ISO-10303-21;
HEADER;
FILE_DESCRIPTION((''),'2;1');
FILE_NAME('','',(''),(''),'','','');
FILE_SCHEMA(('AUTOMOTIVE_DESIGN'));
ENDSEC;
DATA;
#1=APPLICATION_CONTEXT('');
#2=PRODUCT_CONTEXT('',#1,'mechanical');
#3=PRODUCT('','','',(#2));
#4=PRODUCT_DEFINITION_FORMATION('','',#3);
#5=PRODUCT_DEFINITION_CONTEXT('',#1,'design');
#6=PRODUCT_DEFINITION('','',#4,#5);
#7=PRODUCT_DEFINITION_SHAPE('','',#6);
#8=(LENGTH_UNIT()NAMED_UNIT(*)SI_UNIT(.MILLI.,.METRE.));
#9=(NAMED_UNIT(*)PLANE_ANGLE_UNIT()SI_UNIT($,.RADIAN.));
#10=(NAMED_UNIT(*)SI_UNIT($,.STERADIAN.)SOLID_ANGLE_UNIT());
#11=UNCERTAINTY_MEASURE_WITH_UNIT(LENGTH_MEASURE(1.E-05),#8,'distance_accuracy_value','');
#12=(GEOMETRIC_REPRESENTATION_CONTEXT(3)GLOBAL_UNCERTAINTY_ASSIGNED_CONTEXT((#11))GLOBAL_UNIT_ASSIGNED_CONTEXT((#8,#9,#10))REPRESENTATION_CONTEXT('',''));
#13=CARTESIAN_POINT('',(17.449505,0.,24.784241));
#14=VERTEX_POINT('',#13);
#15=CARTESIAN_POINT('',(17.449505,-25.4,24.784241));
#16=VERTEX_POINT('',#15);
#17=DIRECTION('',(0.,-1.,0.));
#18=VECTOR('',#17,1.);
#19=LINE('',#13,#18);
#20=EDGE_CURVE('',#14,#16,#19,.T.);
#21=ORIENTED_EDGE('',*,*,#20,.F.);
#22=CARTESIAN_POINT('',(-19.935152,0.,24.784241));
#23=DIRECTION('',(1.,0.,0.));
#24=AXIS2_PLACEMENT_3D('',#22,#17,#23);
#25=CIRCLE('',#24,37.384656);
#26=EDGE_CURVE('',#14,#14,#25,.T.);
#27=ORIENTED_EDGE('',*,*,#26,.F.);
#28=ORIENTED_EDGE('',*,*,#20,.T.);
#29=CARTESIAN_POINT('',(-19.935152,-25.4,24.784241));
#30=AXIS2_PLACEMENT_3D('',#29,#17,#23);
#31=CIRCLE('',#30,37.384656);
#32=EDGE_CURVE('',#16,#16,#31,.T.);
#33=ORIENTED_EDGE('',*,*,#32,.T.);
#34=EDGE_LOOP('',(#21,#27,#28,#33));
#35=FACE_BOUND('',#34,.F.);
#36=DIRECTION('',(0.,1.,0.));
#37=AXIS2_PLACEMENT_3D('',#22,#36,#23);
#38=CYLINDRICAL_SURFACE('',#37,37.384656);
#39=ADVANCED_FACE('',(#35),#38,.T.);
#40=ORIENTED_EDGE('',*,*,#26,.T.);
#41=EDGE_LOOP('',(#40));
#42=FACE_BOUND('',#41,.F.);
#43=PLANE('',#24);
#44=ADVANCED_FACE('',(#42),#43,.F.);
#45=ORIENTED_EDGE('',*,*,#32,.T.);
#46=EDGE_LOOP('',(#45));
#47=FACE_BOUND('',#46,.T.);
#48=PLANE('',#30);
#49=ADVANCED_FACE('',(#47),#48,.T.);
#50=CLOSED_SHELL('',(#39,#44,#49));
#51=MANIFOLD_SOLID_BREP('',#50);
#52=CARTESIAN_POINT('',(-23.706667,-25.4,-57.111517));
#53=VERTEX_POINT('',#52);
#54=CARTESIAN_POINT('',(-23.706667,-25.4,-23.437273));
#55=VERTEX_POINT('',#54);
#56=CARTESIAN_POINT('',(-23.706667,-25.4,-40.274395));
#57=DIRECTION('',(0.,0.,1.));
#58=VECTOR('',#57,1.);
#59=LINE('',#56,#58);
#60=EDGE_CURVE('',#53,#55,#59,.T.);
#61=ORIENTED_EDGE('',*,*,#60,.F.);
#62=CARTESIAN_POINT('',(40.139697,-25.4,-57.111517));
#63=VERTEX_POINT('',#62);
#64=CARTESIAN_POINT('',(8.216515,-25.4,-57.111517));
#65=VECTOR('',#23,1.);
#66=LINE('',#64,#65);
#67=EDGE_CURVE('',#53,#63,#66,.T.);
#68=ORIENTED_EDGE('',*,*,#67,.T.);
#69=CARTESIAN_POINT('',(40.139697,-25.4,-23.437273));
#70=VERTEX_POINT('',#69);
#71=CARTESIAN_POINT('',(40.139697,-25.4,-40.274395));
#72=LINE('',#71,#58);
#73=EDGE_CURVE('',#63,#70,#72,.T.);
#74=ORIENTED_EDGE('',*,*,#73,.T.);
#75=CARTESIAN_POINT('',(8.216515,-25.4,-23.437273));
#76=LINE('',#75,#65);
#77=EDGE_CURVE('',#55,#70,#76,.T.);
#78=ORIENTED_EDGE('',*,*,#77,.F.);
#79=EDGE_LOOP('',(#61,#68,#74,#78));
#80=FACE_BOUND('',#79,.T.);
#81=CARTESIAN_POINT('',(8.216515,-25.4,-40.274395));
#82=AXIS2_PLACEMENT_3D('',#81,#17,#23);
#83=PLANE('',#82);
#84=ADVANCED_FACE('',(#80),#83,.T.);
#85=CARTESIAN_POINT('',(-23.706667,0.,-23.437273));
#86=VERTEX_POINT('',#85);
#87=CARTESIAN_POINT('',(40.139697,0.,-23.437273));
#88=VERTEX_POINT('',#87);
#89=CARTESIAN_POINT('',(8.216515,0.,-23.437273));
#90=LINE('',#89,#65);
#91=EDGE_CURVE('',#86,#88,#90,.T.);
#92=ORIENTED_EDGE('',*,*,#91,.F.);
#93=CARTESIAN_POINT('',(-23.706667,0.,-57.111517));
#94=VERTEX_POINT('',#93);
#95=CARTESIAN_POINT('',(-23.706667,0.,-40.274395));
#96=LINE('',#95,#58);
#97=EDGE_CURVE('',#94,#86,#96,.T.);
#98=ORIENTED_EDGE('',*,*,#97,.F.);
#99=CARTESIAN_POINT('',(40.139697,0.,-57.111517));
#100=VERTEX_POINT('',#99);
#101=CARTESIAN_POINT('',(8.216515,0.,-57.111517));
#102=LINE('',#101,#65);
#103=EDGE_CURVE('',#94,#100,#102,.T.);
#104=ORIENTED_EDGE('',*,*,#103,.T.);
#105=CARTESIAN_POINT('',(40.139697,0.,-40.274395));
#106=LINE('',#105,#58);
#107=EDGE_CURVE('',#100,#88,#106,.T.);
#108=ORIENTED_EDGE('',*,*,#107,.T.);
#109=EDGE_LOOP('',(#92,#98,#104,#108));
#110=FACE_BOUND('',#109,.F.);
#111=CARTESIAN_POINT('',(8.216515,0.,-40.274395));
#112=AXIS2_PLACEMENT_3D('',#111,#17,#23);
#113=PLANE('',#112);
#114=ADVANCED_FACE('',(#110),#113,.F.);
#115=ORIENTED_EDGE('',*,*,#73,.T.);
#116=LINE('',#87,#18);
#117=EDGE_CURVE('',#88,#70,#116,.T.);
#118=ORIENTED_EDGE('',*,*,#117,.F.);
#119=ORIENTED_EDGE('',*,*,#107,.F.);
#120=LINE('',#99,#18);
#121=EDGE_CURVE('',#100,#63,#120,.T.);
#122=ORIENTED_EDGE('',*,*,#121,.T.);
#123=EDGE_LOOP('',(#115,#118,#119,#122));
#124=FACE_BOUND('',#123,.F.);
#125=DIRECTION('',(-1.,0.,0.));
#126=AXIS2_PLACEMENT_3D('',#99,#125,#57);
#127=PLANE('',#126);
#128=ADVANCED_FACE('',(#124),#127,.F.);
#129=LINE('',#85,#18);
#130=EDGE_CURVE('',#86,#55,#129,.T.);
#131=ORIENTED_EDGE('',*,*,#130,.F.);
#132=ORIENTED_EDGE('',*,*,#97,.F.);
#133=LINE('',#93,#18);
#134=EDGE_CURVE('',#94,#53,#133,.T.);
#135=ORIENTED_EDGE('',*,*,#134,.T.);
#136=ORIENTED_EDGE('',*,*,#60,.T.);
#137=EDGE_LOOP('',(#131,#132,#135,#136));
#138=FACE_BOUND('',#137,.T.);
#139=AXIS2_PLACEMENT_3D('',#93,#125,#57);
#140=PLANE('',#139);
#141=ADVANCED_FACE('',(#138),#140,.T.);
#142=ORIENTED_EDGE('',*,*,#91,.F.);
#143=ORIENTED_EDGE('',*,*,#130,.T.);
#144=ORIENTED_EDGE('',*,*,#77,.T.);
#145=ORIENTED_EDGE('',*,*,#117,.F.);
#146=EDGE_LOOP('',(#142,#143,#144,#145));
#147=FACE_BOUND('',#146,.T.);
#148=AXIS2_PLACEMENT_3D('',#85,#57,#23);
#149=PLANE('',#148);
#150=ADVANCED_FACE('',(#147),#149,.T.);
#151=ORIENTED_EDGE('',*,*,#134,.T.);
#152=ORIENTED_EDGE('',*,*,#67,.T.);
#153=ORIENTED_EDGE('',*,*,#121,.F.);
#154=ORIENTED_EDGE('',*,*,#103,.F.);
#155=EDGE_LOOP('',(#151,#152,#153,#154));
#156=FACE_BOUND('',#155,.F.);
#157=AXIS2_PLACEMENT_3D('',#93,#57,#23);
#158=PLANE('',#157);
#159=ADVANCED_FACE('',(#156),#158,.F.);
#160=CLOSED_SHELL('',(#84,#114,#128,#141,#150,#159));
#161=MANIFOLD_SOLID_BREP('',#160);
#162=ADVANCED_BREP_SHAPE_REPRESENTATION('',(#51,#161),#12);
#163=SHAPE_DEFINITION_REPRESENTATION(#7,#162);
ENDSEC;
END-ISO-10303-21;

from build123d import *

# Parameters (mm, degrees)
F0_R     = 37.3846562125
F1_DEPTH = 25.4
F0_W     = 63.8463646173
F0_H     = 33.6742438376
F3_DEPTH = 3683
F4_R     = 7.4510701555
F5_DEPTH = 3683


# Not quite as in the source:
# - a feature names something its author has since deleted; it is built from what else it names


with BuildPart() as f1:
    # F0 (on Front) → F1 (new body)
    with BuildSketch(Plane.XZ):
        with Locations((-19.9351515621, 24.7842408717)):
            Circle(F0_R)
    extrude(amount=F1_DEPTH)

    # F0 (on Front) → F3 (cut)
    with BuildSketch(Plane.XZ):
        with Locations((-19.9351515621, 24.7842408717)):
            Circle(F0_R)
        with Locations((8.2165151834, -40.2743946761)):
            Rectangle(F0_W, F0_H)
    extrude(amount=-F3_DEPTH, mode=Mode.SUBTRACT)

    # F4 (on Front) + F0 (on Front) → F5 (cut)
    with BuildSketch(Plane.XZ):
        with Locations((-10.7757588848, 47.1439398825)):
            Circle(F4_R)
    with BuildSketch(Plane.XZ):
        with Locations((-19.9351515621, 24.7842408717)):
            Circle(F0_R)
        with Locations((8.2165151834, -40.2743946761)):
            Rectangle(F0_W, F0_H)
    extrude(amount=-F5_DEPTH, mode=Mode.SUBTRACT)


with BuildPart() as f1b:
    # F0 (on Front) → F1, piece 2 (new body)
    with BuildSketch(Plane.XZ):
        with Locations((8.2165151834, -40.2743946761)):
            Rectangle(F0_W, F0_H)
    extrude(amount=F1_DEPTH)


solid = Compound([f1.part, f1b.part])
